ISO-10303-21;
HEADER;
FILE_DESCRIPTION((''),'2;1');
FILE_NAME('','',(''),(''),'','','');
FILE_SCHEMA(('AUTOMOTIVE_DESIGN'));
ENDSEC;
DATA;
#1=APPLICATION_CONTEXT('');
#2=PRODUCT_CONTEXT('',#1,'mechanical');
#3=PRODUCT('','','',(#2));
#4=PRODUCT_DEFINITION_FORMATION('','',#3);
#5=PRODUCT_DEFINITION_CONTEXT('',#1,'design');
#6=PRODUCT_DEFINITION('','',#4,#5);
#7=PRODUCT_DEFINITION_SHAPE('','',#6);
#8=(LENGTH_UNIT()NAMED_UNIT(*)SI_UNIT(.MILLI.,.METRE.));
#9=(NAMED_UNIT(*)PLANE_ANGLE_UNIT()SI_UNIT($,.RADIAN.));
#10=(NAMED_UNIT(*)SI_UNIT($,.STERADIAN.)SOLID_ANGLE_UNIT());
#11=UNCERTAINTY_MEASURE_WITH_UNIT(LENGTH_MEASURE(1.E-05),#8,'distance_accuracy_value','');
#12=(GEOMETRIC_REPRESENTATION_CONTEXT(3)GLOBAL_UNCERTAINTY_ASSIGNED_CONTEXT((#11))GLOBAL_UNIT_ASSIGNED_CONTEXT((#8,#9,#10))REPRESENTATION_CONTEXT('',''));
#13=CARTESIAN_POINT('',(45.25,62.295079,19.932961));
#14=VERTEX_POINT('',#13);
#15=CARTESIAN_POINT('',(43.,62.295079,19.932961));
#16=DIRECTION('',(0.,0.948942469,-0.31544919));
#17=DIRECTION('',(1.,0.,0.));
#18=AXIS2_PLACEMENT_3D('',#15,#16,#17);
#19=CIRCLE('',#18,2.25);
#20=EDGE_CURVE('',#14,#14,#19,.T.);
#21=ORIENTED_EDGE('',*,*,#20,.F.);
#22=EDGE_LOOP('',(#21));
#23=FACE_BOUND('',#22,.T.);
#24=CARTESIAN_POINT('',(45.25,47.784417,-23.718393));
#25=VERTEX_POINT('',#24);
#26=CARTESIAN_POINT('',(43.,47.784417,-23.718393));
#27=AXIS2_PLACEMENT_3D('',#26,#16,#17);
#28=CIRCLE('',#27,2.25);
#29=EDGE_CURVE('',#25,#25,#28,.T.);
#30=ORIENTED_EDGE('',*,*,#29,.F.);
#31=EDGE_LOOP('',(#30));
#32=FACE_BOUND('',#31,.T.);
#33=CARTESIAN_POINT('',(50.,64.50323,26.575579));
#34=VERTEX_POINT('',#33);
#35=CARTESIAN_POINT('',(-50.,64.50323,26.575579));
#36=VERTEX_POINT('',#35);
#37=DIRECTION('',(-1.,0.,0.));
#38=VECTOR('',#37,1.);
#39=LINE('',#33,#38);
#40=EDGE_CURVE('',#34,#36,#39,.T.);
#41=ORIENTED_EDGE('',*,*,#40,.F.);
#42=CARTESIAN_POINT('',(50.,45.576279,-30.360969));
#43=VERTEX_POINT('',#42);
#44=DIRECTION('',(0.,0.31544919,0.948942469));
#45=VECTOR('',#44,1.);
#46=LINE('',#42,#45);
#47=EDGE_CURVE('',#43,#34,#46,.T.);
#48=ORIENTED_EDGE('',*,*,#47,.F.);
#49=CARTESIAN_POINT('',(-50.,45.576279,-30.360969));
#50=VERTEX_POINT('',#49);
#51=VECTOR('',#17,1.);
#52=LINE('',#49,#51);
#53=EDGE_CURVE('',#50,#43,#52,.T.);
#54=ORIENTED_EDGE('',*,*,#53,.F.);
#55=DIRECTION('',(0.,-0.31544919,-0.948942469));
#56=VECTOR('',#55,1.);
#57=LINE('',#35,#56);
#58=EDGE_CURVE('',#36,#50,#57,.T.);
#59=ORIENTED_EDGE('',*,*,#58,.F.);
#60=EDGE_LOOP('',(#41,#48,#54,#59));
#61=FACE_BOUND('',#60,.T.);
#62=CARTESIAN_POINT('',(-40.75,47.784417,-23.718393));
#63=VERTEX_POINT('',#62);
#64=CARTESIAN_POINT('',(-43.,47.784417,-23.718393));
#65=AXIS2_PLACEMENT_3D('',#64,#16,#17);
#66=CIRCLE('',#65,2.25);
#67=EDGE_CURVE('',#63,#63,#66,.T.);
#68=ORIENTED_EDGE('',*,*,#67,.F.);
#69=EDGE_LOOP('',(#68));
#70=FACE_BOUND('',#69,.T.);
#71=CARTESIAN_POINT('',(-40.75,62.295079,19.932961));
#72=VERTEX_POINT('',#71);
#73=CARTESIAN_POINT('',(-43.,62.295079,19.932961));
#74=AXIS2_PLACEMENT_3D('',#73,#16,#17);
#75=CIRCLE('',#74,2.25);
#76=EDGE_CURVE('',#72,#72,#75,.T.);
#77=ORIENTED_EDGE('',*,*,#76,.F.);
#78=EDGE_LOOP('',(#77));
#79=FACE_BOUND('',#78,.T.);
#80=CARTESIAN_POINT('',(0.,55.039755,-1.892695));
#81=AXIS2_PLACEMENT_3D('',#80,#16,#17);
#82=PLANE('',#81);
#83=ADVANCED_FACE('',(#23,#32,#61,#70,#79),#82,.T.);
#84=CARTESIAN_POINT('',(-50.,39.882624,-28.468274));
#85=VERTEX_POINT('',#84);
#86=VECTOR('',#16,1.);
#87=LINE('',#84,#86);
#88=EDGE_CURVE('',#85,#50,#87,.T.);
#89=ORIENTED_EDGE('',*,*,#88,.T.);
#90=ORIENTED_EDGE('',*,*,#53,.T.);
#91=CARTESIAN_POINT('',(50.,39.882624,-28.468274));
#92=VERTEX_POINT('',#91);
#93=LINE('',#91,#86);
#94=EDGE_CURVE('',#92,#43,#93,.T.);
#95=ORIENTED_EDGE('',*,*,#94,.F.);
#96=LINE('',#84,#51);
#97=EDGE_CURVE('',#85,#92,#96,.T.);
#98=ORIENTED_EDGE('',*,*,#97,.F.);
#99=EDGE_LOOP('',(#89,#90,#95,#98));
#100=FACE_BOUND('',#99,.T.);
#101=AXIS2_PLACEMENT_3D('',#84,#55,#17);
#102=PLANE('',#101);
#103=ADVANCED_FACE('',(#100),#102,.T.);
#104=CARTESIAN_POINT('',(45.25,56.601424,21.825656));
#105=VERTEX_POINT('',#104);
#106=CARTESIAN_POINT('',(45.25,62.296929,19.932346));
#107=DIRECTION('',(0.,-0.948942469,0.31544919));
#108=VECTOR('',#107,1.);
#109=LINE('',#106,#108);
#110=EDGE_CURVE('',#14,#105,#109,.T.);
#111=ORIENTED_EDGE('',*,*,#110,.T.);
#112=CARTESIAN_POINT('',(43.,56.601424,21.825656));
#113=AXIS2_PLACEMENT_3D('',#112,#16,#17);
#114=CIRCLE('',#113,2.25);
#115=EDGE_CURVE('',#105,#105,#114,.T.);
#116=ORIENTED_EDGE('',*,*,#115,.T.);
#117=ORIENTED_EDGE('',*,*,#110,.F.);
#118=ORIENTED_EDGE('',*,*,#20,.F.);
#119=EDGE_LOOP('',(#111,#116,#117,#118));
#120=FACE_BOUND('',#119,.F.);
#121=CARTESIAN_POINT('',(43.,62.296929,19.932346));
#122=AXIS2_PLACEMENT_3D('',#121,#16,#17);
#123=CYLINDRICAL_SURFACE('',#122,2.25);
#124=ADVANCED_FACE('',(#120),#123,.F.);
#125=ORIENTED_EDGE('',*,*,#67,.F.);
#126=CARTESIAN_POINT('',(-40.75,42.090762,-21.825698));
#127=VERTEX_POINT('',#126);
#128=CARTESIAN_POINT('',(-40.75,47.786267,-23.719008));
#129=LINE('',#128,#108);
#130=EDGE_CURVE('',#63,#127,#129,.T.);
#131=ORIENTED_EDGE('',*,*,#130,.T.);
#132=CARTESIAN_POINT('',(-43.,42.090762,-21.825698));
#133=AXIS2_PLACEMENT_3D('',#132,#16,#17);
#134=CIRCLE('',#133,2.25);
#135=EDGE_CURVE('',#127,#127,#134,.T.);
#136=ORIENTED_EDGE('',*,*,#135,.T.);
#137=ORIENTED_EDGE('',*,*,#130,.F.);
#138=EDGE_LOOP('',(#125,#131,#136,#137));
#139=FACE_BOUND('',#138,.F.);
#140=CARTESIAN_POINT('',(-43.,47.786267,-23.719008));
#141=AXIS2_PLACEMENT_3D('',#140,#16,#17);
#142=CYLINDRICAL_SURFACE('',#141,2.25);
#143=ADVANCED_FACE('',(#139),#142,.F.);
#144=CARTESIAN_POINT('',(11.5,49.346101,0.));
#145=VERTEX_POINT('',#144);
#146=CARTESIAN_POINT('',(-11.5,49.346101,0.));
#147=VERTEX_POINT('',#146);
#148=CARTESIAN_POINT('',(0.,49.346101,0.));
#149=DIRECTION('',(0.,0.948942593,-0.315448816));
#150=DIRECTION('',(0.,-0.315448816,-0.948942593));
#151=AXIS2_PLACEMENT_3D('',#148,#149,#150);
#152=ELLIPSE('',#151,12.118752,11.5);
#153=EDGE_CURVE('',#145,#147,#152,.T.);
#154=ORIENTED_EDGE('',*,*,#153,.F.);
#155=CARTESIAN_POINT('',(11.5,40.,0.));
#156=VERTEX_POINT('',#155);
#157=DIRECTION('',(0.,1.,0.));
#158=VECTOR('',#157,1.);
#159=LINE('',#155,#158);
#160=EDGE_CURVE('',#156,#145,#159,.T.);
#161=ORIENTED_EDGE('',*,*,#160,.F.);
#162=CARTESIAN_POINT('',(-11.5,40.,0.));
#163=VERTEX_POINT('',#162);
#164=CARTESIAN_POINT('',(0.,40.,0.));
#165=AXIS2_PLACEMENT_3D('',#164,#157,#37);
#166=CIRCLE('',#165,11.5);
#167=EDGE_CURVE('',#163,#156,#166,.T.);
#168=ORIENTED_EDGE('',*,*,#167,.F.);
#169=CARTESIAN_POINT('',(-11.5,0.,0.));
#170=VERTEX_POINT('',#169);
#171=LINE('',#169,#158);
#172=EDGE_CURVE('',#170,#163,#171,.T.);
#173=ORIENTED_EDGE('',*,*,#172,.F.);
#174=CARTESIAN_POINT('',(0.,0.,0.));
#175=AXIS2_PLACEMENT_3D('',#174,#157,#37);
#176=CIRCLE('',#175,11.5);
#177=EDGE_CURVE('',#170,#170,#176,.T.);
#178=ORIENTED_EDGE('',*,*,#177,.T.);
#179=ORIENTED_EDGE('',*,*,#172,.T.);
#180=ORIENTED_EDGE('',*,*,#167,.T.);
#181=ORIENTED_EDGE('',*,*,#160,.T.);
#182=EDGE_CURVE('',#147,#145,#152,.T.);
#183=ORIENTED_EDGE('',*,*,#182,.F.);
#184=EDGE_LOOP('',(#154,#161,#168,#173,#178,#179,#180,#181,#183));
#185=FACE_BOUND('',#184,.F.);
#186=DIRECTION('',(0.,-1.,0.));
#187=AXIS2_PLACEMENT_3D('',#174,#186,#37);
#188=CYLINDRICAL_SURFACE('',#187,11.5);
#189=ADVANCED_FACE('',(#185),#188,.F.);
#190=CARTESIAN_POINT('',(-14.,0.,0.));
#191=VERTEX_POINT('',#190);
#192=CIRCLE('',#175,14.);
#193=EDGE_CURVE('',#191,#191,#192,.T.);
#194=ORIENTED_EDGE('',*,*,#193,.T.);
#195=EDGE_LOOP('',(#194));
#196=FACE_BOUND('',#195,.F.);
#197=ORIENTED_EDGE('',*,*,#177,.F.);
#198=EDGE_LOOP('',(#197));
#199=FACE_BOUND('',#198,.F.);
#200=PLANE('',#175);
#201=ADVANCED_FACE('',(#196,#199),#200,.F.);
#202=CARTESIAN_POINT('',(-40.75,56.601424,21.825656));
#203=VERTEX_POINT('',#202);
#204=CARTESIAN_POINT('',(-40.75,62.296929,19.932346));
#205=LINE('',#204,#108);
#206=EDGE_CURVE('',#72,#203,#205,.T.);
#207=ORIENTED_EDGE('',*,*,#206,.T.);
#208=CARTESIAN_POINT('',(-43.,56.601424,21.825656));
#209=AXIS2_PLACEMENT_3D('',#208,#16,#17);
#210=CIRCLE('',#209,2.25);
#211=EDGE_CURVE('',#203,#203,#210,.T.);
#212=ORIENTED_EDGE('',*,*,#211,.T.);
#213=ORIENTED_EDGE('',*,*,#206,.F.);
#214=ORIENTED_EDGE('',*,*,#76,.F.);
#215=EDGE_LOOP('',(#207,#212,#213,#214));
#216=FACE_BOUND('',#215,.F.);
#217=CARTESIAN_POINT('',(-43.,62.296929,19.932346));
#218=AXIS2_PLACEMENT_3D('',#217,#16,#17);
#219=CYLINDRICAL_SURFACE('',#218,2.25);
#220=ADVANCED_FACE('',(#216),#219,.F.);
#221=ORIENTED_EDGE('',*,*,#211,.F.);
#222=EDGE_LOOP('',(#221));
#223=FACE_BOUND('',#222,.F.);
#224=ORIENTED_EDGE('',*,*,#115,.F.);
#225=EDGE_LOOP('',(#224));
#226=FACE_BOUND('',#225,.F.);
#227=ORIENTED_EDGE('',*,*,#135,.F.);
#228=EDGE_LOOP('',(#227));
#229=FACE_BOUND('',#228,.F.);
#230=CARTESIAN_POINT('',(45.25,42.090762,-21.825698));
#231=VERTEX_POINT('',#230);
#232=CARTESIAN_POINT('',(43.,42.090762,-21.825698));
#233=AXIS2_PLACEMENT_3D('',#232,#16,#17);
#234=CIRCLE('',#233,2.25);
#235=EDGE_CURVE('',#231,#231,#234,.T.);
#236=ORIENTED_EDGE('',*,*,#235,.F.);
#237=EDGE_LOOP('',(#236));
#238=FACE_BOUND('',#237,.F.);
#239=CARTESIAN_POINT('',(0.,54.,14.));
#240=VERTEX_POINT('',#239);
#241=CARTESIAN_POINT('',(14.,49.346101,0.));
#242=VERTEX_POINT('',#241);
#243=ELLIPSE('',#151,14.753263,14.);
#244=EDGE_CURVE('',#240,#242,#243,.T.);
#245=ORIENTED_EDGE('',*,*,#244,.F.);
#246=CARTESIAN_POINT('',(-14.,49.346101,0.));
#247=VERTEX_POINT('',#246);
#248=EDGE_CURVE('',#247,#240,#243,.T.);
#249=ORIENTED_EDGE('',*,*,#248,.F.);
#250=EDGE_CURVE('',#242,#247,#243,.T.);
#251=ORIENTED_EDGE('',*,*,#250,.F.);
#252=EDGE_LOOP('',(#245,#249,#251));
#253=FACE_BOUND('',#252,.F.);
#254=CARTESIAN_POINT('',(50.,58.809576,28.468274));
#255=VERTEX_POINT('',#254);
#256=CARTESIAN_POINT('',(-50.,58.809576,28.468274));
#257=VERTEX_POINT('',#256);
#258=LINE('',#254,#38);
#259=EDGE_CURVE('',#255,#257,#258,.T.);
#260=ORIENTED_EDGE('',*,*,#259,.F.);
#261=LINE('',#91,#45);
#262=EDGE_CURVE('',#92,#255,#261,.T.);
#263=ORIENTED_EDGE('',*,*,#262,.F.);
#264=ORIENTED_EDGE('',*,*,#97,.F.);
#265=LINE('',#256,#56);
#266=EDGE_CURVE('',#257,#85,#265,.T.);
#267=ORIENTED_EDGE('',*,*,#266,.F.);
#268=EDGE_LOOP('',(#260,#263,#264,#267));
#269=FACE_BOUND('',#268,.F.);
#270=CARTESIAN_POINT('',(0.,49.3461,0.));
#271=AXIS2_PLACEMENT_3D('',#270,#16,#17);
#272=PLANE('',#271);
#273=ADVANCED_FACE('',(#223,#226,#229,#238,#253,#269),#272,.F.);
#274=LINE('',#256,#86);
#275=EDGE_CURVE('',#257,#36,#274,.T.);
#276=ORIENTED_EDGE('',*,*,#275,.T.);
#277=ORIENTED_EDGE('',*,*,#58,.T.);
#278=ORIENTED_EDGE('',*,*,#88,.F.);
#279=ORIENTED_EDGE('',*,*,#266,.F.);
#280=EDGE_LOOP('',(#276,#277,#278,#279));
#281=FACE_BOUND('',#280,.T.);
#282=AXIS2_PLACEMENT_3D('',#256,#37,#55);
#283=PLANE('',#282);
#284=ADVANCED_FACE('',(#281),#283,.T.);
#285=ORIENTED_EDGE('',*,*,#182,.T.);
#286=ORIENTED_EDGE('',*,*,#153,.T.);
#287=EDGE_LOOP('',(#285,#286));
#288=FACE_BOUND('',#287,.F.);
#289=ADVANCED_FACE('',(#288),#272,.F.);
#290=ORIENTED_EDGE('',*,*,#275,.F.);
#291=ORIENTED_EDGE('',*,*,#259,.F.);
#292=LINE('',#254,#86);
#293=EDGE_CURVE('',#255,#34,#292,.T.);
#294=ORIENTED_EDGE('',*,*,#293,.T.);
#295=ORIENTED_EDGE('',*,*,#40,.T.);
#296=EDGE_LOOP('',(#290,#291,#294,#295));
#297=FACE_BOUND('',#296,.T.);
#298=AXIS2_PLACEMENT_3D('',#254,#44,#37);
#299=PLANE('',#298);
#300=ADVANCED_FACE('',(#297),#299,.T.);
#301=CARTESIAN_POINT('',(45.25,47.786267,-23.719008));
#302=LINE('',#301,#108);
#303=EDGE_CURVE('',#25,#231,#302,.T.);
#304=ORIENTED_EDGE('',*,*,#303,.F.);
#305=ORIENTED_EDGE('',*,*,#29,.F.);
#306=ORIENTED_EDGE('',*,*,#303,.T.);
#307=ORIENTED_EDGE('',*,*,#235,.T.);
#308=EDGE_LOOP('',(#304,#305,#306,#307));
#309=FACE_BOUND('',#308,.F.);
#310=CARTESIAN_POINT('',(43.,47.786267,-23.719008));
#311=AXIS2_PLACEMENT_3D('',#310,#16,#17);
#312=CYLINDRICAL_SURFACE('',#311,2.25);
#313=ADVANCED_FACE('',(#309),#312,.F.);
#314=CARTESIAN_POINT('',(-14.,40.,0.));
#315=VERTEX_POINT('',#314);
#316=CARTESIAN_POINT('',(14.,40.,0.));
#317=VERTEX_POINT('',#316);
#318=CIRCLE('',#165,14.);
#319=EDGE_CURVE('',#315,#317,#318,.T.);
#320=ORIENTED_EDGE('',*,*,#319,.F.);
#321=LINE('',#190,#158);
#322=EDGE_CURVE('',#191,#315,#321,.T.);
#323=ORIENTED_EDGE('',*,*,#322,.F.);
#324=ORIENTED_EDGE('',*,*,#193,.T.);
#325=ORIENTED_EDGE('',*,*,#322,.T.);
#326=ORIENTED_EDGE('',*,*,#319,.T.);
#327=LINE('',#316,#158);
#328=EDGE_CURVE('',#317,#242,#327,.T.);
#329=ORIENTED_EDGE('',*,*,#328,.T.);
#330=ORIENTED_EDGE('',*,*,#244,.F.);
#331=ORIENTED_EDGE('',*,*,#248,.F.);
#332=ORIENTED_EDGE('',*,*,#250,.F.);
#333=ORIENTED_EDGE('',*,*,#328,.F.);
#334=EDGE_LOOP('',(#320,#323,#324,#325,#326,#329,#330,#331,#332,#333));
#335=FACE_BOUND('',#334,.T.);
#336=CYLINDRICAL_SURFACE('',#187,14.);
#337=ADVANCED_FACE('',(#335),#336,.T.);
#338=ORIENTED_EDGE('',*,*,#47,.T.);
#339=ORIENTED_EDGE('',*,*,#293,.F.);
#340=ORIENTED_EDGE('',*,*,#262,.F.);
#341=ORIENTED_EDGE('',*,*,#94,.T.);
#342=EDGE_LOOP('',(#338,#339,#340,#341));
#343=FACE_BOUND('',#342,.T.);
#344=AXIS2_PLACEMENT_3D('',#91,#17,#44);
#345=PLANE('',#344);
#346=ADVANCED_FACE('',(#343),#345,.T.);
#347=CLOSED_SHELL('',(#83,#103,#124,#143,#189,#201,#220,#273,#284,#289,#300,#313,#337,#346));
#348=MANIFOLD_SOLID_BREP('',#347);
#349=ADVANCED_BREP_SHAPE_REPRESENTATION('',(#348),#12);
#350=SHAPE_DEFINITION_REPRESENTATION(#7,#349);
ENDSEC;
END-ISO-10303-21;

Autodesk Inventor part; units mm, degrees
ref_plane "YZ Plane" through (0, 0, 0) normal (1, 0, 0) x (0, 1, 0)
ref_plane "XZ Plane" through (0, 0, 0) normal (0, 1, 0) x (-1, 0, 0)
ref_plane "XY Plane" through (0, 0, 0) normal (0, 0, 1) x (1, 0, 0)
sketch "Эскиз1" plane through (0, 0, 0) normal (0, 1, 0) x (-1, 0, 0)
  circle A0 centre (0, 0) radius 11.5
  circle A1 centre (0, 0) radius 14
  dimension "d0" = 23
  dimension "d1" = 28
extrude "Выдавливание1" add sketch "Эскиз1" along normal blind 40
sketch "Эскиз6" plane through (0, 40, 0) normal (0, 1, 0) x (1, 0, 0)
  circle A0 centre (0, 0) radius 14
  circle A1 centre (0, 0) radius 11.5 projected
  circle A2 centre (0, 0) radius 12
  circle A3 centre (0, 0) radius 12
extrude "Выдавливание5" add sketch "Эскиз6" along normal blind 14 contours A0 | A2
ref_plane "РабПлоскость1" through (0, 54, 11.8651) normal (1, 0, 0) x (0, 0, -1)
sketch "Эскиз8" plane through (0, 54, 11.8651) normal (1, 0, 0) x (0, 0, -1)
  line L0 (25.8651, 0) -> (-2.1349, 0) projected
  point P0 (11.8651, -54)
sketch "Эскиз9" plane through (0, 54, 11.8651) normal (1, 0, 0) x (0, 0, -1)
  line L0 (25.8651, 0) -> (-2.1349, 0) projected
  line L1 (-2.1349, 0) -> (27.9474, -10)
  line L2 (27.9474, -10) -> (27.9474, 0)
  line L3 (25.8651, -54) -> (25.8651, 0) projected
  line L4 (27.9474, 0) -> (-2.1349, 0)
  line L5 (0.3651, 0) -> (23.3651, 0) projected
  point P0 (11.8651, -54)
  dimension "d30" = 10
extrude "Выдавливание7" cut sketch "Эскиз9" along normal mid plane 70
sketch "Эскиз10" plane through (0, 49.3461, 0) normal (0, 0.9489425, -0.3154492) x (1, 0, 0)
  line L0 (50, -30) -> (-50, -30)
  line L1 (-50, -30) -> (-50, 30)
  line L2 (-50, 30) -> (50, 30)
  line L3 (50, 30) -> (50, -30)
  line L4 (50, -30) -> (-50, 30) construction
  line L5 (-50, -30) -> (50, 30) construction
  point P0 (0, 15.5662)
  point P1 (0, 0)
  dimension "d33" = 100
  dimension "d34" = 60
extrude "Выдавливание8" add sketch "Эскиз10" along normal blind 6
sketch "Эскиз11" plane through (0, 55.0397, -1.8927) normal (0, 0.9489425, -0.3154492) x (1, 0, 0)
  circle A0 centre (-43, -23) radius 2.25
  line L0 (-50, 30) -> (-50, -30) projected
  line L1 (-50, -30) -> (50, -30) projected
  circle A1 centre (-43, 23) radius 2.25
  line L2 (50, 30) -> (-50, 30) projected
  circle A2 centre (43, -23) radius 2.25
  line L3 (50, -30) -> (50, 30) projected
  circle A3 centre (43, 23) radius 2.25
  point P0 (0, 15.5662)
  dimension "d37" = 4.5
  dimension "d38" = 7
  dimension "d39" = 7
  dimension "d40" = 4.5
  dimension "d41" = 7
  dimension "d42" = 7
  dimension "d43" = 4.5
  dimension "d44" = 7
  dimension "d45" = 7
  dimension "d46" = 4.5
  dimension "d47" = 7
  dimension "d48" = 7
extrude "Выдавливание9" cut sketch "Эскиз11" against normal blind 6 contours A0 | A1 | A2 | A3
properties part number "подставка для драйвер хаба"
